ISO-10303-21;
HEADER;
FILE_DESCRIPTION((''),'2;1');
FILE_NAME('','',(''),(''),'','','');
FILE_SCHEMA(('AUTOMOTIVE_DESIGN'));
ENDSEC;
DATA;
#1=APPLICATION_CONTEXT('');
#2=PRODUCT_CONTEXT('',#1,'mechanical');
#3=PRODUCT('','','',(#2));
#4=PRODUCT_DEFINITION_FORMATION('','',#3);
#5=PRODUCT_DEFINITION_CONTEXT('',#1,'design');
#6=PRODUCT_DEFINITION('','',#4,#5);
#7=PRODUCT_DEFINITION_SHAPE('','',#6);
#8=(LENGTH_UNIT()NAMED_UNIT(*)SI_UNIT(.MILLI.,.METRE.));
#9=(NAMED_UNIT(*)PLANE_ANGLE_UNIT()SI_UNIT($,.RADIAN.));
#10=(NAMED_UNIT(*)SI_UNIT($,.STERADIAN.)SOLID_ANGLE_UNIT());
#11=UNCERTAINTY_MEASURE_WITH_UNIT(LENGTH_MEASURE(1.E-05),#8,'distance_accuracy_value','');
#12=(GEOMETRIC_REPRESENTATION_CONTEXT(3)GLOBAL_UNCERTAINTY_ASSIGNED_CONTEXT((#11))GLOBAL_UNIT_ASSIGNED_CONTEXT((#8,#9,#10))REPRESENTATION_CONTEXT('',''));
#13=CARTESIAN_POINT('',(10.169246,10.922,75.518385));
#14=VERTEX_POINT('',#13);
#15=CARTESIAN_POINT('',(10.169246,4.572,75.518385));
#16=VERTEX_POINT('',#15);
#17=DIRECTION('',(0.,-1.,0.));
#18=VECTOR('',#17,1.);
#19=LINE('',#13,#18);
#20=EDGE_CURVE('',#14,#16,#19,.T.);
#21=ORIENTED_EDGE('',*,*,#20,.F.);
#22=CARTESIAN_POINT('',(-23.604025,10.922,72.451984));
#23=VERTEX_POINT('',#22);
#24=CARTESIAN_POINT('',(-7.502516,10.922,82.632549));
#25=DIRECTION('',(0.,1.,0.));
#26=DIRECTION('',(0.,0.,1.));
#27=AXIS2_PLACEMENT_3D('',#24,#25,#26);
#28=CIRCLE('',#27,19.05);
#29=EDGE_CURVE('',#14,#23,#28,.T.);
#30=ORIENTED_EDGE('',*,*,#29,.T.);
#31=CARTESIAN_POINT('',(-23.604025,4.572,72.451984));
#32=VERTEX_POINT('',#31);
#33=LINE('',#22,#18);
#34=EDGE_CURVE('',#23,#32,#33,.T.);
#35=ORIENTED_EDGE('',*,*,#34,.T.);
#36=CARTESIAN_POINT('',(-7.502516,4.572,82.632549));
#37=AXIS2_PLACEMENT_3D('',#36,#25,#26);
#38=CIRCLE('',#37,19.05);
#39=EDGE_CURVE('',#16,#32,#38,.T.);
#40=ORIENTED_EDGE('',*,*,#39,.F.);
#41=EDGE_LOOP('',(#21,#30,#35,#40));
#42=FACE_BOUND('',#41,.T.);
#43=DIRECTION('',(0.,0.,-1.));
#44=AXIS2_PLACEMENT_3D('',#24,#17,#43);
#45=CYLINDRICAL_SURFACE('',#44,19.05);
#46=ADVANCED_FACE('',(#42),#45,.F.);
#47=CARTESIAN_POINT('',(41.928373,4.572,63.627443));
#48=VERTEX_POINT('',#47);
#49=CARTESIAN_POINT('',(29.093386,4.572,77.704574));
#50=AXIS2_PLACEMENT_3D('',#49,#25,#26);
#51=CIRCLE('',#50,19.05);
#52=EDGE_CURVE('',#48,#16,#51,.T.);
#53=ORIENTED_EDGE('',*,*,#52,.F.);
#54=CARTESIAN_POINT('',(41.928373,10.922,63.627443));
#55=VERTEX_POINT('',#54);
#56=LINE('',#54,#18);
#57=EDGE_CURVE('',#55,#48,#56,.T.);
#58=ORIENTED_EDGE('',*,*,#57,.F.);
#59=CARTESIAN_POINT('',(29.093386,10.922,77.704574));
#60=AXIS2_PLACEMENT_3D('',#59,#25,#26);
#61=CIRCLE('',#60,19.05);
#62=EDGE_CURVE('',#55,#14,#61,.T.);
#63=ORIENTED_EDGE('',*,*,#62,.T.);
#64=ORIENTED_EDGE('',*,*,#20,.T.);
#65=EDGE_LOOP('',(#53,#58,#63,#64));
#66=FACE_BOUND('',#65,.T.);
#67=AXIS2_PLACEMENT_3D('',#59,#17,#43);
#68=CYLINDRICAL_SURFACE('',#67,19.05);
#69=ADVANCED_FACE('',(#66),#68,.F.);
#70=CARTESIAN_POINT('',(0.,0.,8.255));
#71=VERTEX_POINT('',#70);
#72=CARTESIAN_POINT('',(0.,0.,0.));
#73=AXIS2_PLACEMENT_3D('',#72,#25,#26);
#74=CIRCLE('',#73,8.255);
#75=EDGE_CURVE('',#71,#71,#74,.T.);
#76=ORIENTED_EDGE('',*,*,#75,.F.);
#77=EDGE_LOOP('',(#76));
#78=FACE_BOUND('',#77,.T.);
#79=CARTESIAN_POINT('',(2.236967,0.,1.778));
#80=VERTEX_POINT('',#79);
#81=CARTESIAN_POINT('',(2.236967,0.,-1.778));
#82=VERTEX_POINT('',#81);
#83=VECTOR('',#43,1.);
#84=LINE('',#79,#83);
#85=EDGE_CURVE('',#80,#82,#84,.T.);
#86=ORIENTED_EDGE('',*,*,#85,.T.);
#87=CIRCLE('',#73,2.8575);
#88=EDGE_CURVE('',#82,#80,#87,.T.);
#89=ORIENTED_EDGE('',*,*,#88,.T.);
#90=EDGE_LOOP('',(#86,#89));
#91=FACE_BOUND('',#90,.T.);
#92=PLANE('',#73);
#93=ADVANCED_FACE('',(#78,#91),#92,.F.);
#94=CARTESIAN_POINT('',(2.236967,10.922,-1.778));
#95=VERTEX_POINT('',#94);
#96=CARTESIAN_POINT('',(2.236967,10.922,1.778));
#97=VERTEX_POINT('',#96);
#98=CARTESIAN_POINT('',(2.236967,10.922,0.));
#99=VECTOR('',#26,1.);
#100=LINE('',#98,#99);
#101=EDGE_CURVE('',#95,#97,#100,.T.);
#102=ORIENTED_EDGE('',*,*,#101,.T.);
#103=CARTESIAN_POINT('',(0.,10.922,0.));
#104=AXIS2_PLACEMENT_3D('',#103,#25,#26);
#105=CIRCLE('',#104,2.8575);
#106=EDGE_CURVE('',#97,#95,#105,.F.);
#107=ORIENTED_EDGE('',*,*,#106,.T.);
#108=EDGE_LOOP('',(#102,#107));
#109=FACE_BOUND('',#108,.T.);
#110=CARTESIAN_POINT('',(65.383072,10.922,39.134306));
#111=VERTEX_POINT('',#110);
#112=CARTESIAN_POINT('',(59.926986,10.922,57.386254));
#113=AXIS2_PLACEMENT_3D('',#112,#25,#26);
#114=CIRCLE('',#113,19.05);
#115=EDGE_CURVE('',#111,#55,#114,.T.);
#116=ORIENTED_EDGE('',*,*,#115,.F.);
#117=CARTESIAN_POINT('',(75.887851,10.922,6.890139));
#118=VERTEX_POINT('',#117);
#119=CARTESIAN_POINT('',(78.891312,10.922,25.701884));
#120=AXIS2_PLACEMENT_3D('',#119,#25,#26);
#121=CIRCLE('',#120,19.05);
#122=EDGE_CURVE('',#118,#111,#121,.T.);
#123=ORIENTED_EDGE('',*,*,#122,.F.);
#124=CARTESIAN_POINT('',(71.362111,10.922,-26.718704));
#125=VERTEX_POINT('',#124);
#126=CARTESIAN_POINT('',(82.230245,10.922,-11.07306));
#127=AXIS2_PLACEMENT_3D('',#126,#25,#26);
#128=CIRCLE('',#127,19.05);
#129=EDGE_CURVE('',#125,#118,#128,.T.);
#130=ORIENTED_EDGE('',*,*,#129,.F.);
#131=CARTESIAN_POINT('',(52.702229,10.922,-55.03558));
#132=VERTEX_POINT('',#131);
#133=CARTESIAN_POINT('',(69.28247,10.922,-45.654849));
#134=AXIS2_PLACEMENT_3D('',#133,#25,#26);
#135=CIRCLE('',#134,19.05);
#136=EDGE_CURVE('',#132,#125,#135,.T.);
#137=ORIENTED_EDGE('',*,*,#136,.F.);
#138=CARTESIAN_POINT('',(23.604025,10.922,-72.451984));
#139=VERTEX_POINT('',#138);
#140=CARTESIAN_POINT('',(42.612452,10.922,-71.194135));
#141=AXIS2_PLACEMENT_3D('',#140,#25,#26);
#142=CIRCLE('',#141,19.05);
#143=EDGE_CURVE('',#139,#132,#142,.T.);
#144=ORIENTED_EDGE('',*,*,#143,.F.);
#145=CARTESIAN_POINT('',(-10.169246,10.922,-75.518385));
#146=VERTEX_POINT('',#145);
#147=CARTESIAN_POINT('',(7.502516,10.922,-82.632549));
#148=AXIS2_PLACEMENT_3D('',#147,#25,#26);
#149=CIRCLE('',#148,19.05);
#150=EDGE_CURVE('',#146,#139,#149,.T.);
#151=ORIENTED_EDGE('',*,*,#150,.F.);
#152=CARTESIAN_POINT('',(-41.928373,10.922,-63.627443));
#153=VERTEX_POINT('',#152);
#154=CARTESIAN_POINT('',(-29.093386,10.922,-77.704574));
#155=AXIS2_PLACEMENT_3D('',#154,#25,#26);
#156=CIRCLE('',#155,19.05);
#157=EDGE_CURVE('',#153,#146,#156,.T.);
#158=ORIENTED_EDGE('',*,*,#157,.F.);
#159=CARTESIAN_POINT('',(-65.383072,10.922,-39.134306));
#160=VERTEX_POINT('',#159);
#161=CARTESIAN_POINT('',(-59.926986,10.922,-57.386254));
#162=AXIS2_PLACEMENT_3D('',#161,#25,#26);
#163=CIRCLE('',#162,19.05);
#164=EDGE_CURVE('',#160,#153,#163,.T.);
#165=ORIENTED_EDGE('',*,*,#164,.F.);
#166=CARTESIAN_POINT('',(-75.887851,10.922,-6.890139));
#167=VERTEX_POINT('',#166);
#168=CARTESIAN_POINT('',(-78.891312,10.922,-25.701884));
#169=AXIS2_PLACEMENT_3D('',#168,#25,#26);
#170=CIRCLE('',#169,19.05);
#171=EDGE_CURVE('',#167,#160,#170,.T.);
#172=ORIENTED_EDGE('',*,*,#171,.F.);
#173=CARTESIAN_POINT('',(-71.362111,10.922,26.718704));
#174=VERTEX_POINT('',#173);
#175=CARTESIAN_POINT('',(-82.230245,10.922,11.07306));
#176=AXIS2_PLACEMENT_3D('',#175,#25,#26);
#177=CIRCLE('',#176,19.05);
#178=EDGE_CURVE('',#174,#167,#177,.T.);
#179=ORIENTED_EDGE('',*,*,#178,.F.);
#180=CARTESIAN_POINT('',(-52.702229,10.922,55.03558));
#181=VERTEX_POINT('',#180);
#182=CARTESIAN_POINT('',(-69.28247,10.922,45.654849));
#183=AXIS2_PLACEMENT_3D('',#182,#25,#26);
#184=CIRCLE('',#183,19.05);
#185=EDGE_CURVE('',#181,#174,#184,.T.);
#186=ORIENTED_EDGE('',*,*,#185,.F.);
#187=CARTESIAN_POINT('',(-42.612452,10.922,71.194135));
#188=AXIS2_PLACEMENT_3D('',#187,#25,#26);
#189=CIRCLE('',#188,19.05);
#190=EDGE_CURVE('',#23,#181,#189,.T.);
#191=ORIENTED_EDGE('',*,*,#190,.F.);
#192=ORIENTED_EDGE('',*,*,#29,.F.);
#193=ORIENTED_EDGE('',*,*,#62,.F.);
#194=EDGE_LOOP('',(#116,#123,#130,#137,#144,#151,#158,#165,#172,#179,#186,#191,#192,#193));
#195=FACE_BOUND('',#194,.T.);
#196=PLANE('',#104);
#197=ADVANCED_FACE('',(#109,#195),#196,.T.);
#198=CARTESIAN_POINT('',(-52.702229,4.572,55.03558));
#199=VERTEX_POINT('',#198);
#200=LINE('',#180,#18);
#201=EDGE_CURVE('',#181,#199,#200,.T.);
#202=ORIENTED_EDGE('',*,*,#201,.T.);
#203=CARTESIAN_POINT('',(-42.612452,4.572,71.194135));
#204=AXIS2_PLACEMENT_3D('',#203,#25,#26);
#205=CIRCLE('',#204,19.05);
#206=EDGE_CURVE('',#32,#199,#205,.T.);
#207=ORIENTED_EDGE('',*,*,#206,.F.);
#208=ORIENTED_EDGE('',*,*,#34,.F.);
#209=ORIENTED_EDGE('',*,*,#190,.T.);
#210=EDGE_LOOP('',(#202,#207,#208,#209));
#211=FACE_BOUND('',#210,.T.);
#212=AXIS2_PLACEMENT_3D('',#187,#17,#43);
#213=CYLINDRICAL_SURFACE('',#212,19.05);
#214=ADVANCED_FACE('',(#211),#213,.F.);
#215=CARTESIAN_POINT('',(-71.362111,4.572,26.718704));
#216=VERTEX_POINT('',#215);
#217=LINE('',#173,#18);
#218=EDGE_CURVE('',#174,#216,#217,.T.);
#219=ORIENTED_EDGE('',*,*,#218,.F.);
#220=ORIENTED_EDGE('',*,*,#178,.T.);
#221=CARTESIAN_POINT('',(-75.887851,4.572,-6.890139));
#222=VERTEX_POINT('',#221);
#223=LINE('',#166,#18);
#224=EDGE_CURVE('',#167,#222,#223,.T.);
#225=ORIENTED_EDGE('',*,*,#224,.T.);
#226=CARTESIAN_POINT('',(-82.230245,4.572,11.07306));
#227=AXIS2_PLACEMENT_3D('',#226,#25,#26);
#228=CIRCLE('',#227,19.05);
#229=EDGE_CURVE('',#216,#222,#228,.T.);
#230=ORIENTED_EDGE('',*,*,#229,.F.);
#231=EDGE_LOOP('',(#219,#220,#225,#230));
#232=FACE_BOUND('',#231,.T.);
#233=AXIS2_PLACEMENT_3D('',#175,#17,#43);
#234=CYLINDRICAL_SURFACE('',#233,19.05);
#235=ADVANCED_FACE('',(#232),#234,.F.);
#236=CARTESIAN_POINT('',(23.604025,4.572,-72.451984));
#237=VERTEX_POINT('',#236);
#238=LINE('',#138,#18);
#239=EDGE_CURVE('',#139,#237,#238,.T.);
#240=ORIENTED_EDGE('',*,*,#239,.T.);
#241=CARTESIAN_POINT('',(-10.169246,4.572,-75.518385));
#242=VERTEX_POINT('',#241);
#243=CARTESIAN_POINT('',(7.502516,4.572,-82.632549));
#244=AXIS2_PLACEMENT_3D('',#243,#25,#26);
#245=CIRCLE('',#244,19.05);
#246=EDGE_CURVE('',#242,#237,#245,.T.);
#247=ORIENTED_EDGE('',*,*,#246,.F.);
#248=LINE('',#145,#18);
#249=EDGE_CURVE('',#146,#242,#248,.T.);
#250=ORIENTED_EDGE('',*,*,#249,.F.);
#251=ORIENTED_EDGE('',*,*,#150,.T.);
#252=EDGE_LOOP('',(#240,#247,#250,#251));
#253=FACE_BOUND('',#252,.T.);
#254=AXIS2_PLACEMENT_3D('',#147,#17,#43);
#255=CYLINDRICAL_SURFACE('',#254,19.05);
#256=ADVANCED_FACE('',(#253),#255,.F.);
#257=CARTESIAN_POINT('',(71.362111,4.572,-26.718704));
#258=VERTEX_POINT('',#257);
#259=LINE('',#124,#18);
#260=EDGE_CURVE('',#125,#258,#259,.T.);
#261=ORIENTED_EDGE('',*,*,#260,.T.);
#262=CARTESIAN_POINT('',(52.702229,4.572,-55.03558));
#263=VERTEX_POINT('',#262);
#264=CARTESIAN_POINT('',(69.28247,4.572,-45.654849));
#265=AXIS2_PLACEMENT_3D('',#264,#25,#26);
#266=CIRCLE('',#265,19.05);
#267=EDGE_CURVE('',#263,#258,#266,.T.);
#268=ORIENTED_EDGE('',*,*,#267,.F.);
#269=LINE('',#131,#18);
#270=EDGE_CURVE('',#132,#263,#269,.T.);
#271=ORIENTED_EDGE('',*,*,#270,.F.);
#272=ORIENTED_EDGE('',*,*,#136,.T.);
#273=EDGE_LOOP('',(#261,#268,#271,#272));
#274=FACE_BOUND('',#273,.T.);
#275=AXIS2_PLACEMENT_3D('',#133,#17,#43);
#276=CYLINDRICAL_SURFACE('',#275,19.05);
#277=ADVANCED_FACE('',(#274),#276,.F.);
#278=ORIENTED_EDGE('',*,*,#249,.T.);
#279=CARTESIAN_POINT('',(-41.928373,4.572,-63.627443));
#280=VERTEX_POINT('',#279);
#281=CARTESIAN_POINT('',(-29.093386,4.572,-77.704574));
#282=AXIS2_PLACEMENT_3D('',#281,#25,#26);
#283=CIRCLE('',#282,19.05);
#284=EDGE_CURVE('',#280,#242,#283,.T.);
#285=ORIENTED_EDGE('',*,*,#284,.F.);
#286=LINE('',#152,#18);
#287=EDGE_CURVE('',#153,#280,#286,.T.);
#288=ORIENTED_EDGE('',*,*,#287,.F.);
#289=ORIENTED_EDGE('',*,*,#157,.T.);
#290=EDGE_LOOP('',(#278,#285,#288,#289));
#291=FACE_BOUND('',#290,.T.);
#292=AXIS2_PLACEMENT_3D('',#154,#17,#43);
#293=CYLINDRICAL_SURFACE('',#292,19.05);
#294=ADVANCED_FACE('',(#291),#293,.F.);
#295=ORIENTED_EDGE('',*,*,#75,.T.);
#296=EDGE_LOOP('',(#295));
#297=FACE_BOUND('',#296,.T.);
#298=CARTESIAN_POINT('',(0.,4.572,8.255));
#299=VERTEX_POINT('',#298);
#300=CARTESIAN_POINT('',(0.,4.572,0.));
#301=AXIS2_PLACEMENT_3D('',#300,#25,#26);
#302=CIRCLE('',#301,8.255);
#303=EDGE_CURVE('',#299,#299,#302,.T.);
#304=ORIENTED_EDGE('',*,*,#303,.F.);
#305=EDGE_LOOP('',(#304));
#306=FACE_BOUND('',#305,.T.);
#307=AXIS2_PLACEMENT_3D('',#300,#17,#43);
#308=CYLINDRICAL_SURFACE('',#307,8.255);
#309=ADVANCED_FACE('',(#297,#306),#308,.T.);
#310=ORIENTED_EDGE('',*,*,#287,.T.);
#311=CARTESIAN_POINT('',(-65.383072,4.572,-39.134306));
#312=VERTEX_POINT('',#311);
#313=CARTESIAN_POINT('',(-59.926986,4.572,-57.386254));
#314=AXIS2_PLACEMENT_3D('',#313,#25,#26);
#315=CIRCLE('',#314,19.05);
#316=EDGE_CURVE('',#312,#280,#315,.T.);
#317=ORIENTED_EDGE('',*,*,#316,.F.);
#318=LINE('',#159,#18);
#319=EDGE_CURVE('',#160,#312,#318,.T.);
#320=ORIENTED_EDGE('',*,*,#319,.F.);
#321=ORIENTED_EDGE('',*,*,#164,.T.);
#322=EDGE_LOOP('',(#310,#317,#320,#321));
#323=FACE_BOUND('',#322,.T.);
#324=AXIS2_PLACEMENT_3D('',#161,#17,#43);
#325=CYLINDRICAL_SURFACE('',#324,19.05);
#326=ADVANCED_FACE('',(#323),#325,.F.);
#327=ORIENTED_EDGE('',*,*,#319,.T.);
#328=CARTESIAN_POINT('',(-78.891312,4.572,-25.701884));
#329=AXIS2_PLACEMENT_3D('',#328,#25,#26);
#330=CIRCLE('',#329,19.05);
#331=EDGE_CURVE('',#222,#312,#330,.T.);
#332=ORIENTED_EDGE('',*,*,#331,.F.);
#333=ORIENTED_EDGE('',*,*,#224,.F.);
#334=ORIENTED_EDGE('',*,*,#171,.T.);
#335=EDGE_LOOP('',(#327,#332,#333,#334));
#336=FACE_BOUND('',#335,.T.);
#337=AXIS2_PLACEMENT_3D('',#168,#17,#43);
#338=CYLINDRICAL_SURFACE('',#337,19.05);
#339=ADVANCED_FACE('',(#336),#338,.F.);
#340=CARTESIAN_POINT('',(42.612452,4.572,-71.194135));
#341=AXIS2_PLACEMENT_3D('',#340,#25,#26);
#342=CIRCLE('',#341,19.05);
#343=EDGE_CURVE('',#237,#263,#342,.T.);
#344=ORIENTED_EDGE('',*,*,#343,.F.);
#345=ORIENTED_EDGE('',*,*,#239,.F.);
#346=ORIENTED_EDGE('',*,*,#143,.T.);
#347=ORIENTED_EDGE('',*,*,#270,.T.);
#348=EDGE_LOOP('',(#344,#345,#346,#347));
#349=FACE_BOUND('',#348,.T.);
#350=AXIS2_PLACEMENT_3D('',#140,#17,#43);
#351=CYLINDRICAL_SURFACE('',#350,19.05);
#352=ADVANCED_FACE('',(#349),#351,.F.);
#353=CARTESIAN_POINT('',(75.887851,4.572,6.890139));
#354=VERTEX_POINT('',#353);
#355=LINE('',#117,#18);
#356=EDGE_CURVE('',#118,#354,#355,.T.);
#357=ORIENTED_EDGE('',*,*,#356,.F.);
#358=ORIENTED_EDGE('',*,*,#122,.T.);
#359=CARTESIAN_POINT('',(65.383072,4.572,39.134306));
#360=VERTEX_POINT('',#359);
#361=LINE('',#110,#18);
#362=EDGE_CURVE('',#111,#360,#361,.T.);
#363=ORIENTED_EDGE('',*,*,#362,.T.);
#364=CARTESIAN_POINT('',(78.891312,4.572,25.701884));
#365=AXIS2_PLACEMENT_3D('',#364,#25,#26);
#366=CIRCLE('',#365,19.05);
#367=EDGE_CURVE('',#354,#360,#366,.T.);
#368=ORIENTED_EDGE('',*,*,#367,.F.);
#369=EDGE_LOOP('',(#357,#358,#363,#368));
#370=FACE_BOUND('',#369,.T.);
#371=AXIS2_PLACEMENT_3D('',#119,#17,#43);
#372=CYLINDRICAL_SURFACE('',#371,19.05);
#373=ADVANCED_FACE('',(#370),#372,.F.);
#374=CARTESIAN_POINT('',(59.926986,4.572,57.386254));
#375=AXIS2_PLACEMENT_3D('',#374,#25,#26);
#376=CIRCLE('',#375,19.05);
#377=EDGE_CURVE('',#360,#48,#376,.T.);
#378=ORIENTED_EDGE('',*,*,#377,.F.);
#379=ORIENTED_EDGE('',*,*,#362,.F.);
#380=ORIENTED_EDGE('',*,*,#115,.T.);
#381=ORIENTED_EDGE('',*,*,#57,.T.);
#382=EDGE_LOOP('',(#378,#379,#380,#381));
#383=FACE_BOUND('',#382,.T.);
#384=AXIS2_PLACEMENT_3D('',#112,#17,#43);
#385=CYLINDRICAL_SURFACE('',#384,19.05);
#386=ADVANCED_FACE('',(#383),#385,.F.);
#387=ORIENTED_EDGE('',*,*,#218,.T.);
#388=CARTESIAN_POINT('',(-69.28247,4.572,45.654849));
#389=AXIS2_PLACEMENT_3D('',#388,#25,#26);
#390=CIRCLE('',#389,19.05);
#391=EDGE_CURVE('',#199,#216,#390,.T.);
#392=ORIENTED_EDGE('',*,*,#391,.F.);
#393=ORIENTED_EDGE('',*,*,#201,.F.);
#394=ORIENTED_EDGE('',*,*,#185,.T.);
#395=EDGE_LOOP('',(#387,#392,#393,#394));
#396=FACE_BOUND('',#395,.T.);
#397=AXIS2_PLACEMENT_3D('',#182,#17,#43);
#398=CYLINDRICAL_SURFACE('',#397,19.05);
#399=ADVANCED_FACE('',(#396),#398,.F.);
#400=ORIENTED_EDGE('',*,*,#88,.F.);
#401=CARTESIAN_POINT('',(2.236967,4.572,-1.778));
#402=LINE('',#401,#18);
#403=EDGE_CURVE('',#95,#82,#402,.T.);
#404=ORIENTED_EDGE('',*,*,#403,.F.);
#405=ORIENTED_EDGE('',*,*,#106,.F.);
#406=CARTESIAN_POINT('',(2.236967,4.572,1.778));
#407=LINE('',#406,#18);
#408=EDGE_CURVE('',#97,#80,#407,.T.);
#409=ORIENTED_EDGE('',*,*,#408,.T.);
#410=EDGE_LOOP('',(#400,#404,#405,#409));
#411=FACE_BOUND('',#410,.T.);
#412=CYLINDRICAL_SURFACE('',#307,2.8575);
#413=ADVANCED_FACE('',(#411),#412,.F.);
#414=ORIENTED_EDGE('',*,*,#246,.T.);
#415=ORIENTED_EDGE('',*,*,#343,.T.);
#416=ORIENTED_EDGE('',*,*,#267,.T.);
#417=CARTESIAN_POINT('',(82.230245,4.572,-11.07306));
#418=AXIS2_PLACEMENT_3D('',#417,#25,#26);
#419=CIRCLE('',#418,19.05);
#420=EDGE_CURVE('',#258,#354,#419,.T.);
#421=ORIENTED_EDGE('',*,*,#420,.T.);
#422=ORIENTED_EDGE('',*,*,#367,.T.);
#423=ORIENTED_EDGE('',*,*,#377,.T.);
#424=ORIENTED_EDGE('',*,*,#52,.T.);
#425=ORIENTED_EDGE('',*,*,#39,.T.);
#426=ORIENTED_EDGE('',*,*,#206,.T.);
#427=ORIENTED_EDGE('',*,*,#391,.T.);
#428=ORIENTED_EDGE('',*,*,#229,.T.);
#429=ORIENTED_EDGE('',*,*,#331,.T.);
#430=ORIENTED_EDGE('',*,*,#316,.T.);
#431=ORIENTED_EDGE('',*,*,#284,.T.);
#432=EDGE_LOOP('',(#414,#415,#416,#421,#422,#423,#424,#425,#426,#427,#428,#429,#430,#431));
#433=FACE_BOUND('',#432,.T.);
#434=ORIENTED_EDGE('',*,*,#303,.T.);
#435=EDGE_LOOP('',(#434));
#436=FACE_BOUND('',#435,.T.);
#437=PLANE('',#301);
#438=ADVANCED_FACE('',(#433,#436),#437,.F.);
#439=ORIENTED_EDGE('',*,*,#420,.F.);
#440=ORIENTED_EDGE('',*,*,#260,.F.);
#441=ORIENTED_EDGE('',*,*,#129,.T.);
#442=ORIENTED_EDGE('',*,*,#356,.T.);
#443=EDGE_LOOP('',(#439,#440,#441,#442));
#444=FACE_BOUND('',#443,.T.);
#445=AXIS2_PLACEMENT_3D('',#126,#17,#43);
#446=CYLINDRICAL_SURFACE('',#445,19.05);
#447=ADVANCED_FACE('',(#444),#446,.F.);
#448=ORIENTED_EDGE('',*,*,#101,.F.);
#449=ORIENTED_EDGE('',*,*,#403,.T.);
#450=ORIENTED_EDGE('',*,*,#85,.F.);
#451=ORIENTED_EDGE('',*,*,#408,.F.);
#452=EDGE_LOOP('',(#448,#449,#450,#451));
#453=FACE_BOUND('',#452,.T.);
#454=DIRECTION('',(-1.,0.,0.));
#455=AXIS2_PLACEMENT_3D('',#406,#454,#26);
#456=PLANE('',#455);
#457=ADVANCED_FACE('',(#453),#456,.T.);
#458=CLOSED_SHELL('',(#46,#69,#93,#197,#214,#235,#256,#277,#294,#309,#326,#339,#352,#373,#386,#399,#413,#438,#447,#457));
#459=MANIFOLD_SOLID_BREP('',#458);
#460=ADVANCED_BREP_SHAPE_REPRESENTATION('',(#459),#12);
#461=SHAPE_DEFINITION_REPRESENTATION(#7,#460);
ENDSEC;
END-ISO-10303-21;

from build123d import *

# Parameters (mm, degrees)
SKETCH1_R           = 8.255
BOSS_EXTRUDE1_DEPTH = 4.572
BOSS_EXTRUDE2_DEPTH = 6.35


with BuildPart() as part:
    # Sketch1 → Boss-Extrude1 (new body)
    with BuildSketch(Plane(origin=(0, 0, 0), x_dir=(1, 0, 0), z_dir=(0, 1, 0))):
        Circle(SKETCH1_R)
        with BuildLine():
            Line((2.236967199, -1.778), (2.236967199, 1.778))
            ThreePointArc((2.236967199, 1.778), (-2.8575, 0), (2.236967199, -1.778))
        make_face(mode=Mode.SUBTRACT)
    extrude(amount=BOSS_EXTRUDE1_DEPTH)

    # Sketch2 → Boss-Extrude2 (add)
    with BuildSketch(Plane(origin=(0, 4.572, 0), x_dir=(1, 0, 0), z_dir=(0, 1, 0))):
        with BuildLine():
            ThreePointArc((-10.169246297, 75.518384714), (-22.413710496, 59.86404587), (-41.928373455, 63.627442974))
            ThreePointArc((-41.928373455, 63.627442974), (-46.168091432, 44.210697118), (-65.383072033, 39.134305814))
            ThreePointArc((-65.383072033, 39.134305814), (-60.778315646, 19.800877593), (-75.887851324, 6.890139437))
            ThreePointArc((-75.887851324, 6.890139437), (-63.350649048, -8.530748581), (-71.362110957, -26.718703558))
            ThreePointArc((-71.362110957, -26.718703558), (-53.375609462, -35.172755376), (-52.702229316, -55.03557963))
            ThreePointArc((-52.702229316, -55.03557963), (-32.828875813, -54.848366603), (-23.604024808, -72.451984189))
            ThreePointArc((-23.604024808, -72.451984189), (-5.779980689, -63.660586154), (10.169246297, -75.518384714))
            ThreePointArc((10.169246297, -75.518384714), (22.413710496, -59.86404587), (41.928373455, -63.627442974))
            ThreePointArc((41.928373455, -63.627442974), (46.168091432, -44.210697118), (65.383072033, -39.134305814))
            ThreePointArc((65.383072033, -39.134305814), (60.778315646, -19.800877593), (75.887851324, -6.890139437))
            ThreePointArc((75.887851324, -6.890139437), (63.350649048, 8.530748581), (71.362110957, 26.718703558))
            ThreePointArc((71.362110957, 26.718703558), (53.375609462, 35.172755376), (52.702229316, 55.03557963))
            ThreePointArc((52.702229316, 55.03557963), (32.828875813, 54.848366603), (23.604024808, 72.451984189))
            ThreePointArc((23.604024808, 72.451984189), (5.779980689, 63.660586154), (-10.169246297, 75.518384714))
        make_face()
        with BuildLine():
            Line((2.236967199, 1.778), (2.236967199, -1.778))
            ThreePointArc((2.236967199, -1.778), (-2.8575, 0), (2.236967199, 1.778))
        make_face(mode=Mode.SUBTRACT)
    extrude(amount=BOSS_EXTRUDE2_DEPTH)


solid = part.part
